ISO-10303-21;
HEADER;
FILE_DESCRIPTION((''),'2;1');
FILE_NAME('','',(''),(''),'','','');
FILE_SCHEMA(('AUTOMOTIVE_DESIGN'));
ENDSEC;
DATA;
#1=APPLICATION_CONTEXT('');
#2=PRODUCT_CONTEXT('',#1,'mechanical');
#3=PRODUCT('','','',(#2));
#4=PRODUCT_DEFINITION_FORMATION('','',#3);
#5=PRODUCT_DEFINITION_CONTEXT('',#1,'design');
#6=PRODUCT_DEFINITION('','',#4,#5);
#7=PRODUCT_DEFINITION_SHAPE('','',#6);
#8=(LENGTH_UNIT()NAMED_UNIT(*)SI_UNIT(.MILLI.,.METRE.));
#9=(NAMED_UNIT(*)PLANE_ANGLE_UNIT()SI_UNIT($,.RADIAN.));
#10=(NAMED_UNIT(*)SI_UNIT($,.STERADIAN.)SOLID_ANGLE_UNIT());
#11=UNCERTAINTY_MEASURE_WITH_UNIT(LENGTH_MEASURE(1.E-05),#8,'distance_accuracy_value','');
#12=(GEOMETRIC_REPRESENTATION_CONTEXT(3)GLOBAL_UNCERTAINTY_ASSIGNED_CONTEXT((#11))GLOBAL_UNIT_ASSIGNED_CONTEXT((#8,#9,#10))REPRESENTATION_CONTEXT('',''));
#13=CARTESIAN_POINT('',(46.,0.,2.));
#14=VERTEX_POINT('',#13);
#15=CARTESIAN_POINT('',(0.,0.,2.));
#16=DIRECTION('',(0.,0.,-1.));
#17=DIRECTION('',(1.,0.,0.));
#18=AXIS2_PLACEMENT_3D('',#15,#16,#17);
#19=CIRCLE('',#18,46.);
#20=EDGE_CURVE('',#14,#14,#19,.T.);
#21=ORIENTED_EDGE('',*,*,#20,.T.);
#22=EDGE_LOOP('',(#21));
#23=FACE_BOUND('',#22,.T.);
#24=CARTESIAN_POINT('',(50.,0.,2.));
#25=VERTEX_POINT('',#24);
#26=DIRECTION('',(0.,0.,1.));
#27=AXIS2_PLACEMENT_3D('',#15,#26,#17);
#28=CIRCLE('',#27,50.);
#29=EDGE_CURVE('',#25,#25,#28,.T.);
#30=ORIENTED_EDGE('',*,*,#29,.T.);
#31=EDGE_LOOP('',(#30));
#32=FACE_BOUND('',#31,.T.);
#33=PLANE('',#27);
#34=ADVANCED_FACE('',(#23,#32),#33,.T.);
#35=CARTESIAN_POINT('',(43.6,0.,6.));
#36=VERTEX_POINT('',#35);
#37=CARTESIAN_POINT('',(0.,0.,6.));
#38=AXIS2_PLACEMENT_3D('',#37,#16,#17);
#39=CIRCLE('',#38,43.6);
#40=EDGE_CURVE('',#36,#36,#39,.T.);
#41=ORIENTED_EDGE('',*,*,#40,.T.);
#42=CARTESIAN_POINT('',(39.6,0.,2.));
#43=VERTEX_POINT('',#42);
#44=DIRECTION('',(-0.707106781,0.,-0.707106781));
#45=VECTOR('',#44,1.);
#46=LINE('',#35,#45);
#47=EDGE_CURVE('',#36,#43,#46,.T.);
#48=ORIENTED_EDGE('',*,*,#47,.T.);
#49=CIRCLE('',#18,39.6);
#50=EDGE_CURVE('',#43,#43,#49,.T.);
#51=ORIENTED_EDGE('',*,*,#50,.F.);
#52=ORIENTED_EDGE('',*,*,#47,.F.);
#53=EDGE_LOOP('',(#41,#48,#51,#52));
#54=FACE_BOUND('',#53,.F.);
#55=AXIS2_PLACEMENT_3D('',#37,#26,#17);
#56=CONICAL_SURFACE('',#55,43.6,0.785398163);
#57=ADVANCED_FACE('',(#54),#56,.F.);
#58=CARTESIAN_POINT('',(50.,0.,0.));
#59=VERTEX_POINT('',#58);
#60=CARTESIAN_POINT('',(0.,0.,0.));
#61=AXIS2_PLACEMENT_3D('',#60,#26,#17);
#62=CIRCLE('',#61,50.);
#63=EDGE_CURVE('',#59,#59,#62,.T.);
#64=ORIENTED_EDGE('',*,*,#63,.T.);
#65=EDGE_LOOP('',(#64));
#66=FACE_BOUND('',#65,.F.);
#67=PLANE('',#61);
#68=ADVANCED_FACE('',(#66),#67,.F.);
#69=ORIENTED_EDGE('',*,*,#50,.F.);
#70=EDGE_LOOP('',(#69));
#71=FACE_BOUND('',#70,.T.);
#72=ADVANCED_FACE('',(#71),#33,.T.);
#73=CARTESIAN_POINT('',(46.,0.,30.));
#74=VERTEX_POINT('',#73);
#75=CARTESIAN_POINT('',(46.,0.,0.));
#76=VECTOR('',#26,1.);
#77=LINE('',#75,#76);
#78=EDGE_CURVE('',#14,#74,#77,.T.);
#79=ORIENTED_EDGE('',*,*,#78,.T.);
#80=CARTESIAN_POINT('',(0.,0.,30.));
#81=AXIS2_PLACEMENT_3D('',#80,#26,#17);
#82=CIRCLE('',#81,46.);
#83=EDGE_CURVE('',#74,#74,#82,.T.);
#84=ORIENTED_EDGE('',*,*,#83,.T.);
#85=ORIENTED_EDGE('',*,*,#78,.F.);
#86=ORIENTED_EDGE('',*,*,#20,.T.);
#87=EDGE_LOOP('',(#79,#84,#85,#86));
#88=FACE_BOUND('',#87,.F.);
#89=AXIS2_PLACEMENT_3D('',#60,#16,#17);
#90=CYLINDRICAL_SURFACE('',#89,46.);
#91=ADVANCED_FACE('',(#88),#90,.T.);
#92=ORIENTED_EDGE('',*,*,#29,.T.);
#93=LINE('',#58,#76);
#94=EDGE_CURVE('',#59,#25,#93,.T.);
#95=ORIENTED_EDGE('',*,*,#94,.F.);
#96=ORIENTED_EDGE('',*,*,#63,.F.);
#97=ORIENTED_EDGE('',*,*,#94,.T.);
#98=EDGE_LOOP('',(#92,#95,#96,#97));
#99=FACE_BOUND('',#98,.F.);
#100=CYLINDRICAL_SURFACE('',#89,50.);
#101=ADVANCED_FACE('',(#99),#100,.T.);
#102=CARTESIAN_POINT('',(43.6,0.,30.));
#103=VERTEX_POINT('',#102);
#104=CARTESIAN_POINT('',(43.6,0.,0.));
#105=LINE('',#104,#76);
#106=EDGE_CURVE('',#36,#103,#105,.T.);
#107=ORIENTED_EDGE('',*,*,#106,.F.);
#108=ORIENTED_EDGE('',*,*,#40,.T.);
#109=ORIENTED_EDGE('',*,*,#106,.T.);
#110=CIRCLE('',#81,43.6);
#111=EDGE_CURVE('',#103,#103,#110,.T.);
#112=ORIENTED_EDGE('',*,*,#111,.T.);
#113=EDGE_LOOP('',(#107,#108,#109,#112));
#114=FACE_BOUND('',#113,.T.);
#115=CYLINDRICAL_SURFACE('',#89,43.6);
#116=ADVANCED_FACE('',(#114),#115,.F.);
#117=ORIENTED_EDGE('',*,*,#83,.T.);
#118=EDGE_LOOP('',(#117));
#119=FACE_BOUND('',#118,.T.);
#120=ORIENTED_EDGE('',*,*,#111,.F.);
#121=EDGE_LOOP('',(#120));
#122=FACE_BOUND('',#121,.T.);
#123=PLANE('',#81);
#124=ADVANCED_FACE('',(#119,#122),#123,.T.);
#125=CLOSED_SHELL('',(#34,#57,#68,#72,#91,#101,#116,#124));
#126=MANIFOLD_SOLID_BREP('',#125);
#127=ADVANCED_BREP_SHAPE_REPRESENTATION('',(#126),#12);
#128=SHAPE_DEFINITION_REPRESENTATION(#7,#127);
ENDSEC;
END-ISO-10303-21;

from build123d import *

# Parameters (mm, degrees)
F0_R     = 50
F0_R_2   = 46
F0_R_3   = 43.6
F1_DEPTH = 2
F2_DEPTH = 30
F3_SIZE  = 4


with BuildPart() as f1:
    # F0 (on Top) → F1 (new body)
    with BuildSketch(Plane.XY):
        Circle(F0_R)
        Circle(F0_R_2, mode=Mode.SUBTRACT)
        Circle(F0_R_2)
        Circle(F0_R_3, mode=Mode.SUBTRACT)
        Circle(F0_R_3)
    extrude(amount=F1_DEPTH)

    # F0 (on Top) → F2 (join)
    with BuildSketch(Plane.XY):
        Circle(F0_R_2)
        Circle(F0_R_3, mode=Mode.SUBTRACT)
    extrude(amount=F2_DEPTH)

    # F3
    f3_edges = [f1.edges().sort_by_distance(p)[0] for p in [
        (-43.6, 0, 2),
    ]]
    chamfer(f3_edges, length=F3_SIZE)


solid = f1.part
